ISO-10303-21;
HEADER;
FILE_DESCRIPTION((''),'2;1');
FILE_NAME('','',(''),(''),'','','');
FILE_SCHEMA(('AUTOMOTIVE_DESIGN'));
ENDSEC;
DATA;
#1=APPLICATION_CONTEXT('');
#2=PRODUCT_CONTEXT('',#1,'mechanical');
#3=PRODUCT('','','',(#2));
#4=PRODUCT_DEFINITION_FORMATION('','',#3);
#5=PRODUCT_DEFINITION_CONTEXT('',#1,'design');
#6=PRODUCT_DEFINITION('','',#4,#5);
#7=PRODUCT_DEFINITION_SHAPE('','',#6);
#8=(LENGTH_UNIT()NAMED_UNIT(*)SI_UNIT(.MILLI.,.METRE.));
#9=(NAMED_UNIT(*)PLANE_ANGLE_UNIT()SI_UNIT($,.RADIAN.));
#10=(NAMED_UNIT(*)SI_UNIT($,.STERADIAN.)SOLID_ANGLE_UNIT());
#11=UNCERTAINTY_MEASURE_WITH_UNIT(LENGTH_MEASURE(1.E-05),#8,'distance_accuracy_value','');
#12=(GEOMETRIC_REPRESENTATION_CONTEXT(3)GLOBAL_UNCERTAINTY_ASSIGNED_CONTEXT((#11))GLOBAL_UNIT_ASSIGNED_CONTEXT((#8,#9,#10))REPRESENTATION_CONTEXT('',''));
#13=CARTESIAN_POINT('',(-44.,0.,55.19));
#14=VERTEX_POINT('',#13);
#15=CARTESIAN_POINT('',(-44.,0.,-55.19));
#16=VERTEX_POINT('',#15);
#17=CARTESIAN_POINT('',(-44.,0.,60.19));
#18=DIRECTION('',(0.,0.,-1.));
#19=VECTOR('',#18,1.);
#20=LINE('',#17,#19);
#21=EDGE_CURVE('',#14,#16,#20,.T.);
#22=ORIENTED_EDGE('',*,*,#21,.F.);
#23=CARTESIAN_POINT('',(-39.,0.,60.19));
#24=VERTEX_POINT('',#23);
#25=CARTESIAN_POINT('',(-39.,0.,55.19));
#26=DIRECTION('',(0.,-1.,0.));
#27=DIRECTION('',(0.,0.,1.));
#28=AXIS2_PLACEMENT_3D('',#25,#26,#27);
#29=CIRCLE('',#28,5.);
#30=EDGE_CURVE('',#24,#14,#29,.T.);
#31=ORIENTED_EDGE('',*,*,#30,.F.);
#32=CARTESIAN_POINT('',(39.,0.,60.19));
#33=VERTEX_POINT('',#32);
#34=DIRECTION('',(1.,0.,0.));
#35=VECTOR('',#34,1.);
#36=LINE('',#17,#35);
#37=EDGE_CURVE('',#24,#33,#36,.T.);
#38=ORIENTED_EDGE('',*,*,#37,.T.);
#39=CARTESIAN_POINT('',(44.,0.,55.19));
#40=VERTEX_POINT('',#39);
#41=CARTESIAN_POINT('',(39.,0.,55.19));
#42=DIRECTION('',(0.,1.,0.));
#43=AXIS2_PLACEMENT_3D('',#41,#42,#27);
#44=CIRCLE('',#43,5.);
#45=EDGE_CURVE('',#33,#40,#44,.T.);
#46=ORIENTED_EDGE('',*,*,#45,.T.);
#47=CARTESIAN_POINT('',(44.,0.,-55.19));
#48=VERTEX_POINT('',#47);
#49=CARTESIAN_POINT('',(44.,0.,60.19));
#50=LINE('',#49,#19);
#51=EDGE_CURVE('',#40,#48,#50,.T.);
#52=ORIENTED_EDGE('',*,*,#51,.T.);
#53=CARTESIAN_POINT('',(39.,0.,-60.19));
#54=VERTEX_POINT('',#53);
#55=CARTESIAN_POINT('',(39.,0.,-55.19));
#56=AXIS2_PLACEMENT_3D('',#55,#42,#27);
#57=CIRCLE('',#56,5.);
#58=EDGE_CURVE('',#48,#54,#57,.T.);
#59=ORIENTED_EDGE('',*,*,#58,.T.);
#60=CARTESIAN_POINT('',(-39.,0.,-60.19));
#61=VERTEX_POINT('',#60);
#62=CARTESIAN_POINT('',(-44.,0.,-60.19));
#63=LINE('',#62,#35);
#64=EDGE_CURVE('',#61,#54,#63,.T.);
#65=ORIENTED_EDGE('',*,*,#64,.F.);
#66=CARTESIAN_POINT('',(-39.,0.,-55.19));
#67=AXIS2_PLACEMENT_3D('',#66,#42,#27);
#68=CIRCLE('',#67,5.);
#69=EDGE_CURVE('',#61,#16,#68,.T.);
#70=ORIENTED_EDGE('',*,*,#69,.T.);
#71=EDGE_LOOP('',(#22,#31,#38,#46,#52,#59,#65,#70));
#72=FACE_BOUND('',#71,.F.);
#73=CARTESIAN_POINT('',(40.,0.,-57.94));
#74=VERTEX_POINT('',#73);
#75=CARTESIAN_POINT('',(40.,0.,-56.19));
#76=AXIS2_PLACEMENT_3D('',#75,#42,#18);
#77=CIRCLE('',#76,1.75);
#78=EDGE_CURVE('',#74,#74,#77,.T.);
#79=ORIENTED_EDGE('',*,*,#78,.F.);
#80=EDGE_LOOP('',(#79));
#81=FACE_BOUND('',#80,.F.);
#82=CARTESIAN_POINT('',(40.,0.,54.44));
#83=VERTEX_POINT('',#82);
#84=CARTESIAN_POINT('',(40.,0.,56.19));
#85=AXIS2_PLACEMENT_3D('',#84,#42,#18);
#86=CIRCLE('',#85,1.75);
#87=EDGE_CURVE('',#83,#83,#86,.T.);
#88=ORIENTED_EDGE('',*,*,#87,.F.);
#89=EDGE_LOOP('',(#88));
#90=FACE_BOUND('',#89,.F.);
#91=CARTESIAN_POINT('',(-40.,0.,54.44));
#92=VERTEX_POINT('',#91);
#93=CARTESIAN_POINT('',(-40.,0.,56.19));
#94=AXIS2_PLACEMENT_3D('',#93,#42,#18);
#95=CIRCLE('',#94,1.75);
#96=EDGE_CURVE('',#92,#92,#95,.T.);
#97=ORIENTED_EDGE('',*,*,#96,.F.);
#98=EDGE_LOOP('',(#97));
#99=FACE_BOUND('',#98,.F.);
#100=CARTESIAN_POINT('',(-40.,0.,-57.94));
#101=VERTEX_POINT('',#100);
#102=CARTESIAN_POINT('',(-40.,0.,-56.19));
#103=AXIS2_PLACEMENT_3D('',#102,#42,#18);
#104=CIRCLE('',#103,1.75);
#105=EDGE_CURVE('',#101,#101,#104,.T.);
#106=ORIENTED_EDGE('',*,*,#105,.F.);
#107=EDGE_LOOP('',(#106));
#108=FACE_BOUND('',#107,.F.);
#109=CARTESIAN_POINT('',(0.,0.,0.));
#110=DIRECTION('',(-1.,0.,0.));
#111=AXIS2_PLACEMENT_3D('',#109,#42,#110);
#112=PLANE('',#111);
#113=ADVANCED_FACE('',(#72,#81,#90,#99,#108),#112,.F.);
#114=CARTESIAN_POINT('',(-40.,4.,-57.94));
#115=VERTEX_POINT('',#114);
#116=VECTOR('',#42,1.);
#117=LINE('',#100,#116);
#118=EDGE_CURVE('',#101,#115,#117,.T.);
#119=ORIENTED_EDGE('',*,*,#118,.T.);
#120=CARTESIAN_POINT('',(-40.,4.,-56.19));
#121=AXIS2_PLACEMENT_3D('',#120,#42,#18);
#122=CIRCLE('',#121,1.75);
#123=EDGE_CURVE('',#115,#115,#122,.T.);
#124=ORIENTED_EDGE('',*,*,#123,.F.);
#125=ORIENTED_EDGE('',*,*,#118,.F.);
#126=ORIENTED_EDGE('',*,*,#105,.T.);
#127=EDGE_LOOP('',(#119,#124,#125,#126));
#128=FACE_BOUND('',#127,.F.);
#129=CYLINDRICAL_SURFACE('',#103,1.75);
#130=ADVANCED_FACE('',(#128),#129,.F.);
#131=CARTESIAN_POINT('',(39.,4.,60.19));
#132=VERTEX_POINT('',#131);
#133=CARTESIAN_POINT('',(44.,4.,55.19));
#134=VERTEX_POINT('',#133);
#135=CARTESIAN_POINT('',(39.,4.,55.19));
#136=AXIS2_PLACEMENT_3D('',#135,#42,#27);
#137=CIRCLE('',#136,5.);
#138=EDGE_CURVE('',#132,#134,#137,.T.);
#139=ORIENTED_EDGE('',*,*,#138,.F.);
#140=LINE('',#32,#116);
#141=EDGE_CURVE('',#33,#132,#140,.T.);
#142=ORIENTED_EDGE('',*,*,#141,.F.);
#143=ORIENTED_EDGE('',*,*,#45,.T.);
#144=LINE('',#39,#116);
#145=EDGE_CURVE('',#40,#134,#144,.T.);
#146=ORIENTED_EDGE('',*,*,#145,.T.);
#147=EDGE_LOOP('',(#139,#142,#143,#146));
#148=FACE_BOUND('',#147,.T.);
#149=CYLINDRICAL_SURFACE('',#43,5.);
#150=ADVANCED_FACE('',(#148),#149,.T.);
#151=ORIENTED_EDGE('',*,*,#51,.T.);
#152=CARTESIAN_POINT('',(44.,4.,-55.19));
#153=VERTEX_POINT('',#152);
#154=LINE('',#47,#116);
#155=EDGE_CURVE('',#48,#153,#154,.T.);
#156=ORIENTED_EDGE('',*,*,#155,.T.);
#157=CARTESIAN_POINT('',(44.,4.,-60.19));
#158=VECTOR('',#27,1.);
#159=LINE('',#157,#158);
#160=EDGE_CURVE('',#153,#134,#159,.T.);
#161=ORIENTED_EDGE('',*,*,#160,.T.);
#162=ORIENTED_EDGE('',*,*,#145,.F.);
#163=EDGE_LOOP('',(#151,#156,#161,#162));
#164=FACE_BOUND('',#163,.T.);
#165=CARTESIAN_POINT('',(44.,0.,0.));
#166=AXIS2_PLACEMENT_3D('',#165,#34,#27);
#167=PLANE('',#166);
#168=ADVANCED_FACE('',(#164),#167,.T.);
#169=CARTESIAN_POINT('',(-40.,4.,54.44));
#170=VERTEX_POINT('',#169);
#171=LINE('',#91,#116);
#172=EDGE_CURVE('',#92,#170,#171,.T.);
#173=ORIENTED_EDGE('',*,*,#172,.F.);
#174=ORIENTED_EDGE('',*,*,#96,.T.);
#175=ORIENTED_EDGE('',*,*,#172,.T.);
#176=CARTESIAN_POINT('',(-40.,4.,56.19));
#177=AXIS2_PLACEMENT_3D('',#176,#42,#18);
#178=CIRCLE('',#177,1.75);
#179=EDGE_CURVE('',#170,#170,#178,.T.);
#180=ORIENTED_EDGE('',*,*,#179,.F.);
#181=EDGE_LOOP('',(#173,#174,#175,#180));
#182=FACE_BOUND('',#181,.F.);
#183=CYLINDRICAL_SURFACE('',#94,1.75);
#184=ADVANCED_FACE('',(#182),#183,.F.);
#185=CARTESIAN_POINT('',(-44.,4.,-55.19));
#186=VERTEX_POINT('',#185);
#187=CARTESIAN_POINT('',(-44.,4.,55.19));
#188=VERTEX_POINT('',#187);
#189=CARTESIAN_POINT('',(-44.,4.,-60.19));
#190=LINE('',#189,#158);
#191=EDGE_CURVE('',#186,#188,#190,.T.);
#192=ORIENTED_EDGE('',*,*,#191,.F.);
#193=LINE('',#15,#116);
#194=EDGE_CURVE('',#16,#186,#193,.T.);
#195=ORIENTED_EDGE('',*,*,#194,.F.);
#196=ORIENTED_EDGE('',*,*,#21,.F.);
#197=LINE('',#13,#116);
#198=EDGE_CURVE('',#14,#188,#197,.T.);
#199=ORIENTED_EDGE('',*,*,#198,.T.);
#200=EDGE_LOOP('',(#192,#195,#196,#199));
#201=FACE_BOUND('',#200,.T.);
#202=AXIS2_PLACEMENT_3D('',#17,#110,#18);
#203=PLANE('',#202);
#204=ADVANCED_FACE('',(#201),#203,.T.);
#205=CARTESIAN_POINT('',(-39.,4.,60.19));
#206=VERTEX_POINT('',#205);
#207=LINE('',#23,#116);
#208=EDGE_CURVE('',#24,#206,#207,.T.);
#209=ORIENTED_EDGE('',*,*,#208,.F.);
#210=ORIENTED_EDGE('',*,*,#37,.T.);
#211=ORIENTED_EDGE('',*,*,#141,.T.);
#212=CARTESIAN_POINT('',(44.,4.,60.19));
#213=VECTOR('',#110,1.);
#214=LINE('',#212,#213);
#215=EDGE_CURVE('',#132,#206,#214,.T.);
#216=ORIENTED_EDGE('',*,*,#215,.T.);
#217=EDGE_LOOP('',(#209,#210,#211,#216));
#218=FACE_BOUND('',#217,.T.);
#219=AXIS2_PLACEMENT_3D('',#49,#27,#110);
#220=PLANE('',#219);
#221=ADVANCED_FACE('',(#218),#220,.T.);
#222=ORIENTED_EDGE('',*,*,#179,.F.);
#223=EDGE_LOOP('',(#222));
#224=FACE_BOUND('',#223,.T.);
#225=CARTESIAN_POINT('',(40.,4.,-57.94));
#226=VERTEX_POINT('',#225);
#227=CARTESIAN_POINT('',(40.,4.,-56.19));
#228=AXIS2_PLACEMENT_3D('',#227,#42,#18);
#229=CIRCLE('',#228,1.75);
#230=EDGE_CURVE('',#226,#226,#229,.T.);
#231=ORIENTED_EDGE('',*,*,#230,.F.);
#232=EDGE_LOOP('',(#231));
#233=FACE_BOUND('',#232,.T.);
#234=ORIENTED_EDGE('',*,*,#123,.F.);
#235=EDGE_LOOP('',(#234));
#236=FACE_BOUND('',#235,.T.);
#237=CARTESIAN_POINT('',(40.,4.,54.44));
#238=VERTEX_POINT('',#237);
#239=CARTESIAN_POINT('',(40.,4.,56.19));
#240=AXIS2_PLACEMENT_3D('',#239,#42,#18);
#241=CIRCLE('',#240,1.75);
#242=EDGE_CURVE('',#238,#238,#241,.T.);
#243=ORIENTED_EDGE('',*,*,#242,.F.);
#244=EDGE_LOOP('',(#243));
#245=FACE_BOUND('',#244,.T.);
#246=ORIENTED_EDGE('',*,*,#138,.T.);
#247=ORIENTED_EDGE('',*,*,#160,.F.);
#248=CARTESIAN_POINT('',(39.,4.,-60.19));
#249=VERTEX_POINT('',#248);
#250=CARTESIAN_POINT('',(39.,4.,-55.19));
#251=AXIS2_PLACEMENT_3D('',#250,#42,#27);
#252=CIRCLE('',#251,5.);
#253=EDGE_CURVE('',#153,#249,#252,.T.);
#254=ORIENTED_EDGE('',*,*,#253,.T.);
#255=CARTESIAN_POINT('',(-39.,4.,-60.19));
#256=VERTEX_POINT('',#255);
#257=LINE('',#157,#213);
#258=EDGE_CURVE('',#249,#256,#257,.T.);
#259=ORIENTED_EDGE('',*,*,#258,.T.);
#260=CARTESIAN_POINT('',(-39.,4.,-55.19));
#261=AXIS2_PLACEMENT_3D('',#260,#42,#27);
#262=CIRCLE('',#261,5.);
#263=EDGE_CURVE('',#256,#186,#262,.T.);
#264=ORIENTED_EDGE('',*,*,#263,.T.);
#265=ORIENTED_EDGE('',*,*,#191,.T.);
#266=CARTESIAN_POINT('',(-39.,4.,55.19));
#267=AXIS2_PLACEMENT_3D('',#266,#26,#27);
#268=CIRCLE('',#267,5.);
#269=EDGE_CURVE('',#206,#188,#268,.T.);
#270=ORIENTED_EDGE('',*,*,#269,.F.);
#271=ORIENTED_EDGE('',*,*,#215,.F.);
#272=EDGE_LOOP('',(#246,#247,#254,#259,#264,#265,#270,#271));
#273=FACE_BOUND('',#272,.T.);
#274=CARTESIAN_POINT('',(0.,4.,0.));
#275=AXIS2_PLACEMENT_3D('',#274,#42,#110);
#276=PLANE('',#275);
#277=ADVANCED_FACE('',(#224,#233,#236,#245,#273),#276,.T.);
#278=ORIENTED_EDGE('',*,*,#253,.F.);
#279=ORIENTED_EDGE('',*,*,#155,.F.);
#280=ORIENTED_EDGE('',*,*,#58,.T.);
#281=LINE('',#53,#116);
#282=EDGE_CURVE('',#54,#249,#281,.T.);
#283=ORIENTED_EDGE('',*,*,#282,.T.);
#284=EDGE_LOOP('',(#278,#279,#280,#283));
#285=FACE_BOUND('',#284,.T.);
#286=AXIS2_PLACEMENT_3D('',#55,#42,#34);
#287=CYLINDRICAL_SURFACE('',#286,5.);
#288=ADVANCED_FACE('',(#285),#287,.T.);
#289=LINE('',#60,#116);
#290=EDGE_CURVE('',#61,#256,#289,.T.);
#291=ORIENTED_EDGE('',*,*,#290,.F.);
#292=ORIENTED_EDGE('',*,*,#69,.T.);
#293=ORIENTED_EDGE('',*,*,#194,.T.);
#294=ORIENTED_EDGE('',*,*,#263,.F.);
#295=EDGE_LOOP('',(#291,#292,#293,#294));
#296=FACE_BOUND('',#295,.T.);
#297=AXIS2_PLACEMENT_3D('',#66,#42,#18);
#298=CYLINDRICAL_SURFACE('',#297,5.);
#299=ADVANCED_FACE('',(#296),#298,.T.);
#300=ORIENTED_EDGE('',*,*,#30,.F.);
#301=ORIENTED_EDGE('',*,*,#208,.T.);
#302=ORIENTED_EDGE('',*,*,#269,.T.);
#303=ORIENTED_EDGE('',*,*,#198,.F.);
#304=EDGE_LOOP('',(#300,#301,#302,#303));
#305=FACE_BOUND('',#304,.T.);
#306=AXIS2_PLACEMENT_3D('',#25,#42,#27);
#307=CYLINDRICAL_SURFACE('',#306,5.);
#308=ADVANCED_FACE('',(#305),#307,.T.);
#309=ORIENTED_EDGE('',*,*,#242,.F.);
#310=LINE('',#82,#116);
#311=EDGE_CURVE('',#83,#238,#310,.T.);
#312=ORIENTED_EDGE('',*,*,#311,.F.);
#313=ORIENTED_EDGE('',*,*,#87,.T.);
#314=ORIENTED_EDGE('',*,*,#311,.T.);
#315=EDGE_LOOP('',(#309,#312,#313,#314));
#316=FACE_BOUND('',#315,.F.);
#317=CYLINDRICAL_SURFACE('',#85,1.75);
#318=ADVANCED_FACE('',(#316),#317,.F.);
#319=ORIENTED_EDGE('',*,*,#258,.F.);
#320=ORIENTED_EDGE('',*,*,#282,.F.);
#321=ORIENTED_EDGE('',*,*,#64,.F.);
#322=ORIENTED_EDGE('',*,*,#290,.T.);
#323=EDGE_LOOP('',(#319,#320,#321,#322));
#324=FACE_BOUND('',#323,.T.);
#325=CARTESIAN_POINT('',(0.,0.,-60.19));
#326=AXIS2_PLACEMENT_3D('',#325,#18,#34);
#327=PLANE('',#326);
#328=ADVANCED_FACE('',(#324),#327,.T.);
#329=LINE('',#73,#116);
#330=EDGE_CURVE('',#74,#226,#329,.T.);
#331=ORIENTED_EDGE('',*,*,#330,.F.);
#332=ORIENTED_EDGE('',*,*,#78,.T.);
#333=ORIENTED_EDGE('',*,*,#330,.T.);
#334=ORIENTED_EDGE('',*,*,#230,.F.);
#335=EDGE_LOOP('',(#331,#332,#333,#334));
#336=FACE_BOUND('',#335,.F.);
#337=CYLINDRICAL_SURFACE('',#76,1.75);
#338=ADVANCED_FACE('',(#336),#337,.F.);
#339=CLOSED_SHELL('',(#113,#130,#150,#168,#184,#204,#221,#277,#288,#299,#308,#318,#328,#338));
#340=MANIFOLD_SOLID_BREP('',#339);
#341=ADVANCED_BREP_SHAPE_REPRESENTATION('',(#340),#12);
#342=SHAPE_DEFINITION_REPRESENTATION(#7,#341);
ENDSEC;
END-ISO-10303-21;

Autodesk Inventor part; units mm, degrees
ref_plane "YZ Plane" through (0, 0, 0) normal (1, 0, 0) x (0, 1, 0)
ref_plane "XZ Plane" through (0, 0, 0) normal (0, 1, 0) x (-1, 0, 0)
ref_plane "XY Plane" through (0, 0, 0) normal (0, 0, 1) x (1, 0, 0)
sketch "草图1" plane through (0, 0, 0) normal (0, 1, 0) x (-1, 0, 0)
  line L0 (-44, 60.19) -> (44, 60.19)
  line L1 (44, 60.19) -> (44, -60.19)
  line L2 (44, -60.19) -> (-44, -60.19)
  line L3 (-44, -60.19) -> (-44, 60.19)
  line L4 (-44, 60.19) -> (44, -60.19) construction
  line L5 (44, 60.19) -> (-44, -60.19) construction
  line L6 (0, 60.19) -> (0, -60.19)
  line L7 (44, 0) -> (-44, 0)
  point P0 (0, 0)
  point P1 (40, 56.19)
  point P2 (40, -56.19)
  point P3 (-40, 56.19)
  point P4 (-40, -56.19)
  dimension "d0" = 88
  dimension "d1" = 120.38
  dimension "d2" = 4
  dimension "d3" = 4
extrude "拉伸1" add sketch "草图1" along normal blind 4
hole "孔1" at (-40, 0, 56.19) at (-40, 0, -56.19) at (40, 0, 56.19) at (40, 0, -56.19) direction (0, 1, 0) diameter 3.5 end through all
fillet "面圆角1" radius 5 1 edges at (44, 2, 60.19)
fillet "面圆角2" radius 5 1 edges at (-44, 2, 60.19)
fillet "面圆角3" radius 5 1 edges at (44, 2, -60.19)
fillet "面圆角4" radius 5 1 edges at (-44, 2, -60.19)
properties part number "PrismGCUpNew"
